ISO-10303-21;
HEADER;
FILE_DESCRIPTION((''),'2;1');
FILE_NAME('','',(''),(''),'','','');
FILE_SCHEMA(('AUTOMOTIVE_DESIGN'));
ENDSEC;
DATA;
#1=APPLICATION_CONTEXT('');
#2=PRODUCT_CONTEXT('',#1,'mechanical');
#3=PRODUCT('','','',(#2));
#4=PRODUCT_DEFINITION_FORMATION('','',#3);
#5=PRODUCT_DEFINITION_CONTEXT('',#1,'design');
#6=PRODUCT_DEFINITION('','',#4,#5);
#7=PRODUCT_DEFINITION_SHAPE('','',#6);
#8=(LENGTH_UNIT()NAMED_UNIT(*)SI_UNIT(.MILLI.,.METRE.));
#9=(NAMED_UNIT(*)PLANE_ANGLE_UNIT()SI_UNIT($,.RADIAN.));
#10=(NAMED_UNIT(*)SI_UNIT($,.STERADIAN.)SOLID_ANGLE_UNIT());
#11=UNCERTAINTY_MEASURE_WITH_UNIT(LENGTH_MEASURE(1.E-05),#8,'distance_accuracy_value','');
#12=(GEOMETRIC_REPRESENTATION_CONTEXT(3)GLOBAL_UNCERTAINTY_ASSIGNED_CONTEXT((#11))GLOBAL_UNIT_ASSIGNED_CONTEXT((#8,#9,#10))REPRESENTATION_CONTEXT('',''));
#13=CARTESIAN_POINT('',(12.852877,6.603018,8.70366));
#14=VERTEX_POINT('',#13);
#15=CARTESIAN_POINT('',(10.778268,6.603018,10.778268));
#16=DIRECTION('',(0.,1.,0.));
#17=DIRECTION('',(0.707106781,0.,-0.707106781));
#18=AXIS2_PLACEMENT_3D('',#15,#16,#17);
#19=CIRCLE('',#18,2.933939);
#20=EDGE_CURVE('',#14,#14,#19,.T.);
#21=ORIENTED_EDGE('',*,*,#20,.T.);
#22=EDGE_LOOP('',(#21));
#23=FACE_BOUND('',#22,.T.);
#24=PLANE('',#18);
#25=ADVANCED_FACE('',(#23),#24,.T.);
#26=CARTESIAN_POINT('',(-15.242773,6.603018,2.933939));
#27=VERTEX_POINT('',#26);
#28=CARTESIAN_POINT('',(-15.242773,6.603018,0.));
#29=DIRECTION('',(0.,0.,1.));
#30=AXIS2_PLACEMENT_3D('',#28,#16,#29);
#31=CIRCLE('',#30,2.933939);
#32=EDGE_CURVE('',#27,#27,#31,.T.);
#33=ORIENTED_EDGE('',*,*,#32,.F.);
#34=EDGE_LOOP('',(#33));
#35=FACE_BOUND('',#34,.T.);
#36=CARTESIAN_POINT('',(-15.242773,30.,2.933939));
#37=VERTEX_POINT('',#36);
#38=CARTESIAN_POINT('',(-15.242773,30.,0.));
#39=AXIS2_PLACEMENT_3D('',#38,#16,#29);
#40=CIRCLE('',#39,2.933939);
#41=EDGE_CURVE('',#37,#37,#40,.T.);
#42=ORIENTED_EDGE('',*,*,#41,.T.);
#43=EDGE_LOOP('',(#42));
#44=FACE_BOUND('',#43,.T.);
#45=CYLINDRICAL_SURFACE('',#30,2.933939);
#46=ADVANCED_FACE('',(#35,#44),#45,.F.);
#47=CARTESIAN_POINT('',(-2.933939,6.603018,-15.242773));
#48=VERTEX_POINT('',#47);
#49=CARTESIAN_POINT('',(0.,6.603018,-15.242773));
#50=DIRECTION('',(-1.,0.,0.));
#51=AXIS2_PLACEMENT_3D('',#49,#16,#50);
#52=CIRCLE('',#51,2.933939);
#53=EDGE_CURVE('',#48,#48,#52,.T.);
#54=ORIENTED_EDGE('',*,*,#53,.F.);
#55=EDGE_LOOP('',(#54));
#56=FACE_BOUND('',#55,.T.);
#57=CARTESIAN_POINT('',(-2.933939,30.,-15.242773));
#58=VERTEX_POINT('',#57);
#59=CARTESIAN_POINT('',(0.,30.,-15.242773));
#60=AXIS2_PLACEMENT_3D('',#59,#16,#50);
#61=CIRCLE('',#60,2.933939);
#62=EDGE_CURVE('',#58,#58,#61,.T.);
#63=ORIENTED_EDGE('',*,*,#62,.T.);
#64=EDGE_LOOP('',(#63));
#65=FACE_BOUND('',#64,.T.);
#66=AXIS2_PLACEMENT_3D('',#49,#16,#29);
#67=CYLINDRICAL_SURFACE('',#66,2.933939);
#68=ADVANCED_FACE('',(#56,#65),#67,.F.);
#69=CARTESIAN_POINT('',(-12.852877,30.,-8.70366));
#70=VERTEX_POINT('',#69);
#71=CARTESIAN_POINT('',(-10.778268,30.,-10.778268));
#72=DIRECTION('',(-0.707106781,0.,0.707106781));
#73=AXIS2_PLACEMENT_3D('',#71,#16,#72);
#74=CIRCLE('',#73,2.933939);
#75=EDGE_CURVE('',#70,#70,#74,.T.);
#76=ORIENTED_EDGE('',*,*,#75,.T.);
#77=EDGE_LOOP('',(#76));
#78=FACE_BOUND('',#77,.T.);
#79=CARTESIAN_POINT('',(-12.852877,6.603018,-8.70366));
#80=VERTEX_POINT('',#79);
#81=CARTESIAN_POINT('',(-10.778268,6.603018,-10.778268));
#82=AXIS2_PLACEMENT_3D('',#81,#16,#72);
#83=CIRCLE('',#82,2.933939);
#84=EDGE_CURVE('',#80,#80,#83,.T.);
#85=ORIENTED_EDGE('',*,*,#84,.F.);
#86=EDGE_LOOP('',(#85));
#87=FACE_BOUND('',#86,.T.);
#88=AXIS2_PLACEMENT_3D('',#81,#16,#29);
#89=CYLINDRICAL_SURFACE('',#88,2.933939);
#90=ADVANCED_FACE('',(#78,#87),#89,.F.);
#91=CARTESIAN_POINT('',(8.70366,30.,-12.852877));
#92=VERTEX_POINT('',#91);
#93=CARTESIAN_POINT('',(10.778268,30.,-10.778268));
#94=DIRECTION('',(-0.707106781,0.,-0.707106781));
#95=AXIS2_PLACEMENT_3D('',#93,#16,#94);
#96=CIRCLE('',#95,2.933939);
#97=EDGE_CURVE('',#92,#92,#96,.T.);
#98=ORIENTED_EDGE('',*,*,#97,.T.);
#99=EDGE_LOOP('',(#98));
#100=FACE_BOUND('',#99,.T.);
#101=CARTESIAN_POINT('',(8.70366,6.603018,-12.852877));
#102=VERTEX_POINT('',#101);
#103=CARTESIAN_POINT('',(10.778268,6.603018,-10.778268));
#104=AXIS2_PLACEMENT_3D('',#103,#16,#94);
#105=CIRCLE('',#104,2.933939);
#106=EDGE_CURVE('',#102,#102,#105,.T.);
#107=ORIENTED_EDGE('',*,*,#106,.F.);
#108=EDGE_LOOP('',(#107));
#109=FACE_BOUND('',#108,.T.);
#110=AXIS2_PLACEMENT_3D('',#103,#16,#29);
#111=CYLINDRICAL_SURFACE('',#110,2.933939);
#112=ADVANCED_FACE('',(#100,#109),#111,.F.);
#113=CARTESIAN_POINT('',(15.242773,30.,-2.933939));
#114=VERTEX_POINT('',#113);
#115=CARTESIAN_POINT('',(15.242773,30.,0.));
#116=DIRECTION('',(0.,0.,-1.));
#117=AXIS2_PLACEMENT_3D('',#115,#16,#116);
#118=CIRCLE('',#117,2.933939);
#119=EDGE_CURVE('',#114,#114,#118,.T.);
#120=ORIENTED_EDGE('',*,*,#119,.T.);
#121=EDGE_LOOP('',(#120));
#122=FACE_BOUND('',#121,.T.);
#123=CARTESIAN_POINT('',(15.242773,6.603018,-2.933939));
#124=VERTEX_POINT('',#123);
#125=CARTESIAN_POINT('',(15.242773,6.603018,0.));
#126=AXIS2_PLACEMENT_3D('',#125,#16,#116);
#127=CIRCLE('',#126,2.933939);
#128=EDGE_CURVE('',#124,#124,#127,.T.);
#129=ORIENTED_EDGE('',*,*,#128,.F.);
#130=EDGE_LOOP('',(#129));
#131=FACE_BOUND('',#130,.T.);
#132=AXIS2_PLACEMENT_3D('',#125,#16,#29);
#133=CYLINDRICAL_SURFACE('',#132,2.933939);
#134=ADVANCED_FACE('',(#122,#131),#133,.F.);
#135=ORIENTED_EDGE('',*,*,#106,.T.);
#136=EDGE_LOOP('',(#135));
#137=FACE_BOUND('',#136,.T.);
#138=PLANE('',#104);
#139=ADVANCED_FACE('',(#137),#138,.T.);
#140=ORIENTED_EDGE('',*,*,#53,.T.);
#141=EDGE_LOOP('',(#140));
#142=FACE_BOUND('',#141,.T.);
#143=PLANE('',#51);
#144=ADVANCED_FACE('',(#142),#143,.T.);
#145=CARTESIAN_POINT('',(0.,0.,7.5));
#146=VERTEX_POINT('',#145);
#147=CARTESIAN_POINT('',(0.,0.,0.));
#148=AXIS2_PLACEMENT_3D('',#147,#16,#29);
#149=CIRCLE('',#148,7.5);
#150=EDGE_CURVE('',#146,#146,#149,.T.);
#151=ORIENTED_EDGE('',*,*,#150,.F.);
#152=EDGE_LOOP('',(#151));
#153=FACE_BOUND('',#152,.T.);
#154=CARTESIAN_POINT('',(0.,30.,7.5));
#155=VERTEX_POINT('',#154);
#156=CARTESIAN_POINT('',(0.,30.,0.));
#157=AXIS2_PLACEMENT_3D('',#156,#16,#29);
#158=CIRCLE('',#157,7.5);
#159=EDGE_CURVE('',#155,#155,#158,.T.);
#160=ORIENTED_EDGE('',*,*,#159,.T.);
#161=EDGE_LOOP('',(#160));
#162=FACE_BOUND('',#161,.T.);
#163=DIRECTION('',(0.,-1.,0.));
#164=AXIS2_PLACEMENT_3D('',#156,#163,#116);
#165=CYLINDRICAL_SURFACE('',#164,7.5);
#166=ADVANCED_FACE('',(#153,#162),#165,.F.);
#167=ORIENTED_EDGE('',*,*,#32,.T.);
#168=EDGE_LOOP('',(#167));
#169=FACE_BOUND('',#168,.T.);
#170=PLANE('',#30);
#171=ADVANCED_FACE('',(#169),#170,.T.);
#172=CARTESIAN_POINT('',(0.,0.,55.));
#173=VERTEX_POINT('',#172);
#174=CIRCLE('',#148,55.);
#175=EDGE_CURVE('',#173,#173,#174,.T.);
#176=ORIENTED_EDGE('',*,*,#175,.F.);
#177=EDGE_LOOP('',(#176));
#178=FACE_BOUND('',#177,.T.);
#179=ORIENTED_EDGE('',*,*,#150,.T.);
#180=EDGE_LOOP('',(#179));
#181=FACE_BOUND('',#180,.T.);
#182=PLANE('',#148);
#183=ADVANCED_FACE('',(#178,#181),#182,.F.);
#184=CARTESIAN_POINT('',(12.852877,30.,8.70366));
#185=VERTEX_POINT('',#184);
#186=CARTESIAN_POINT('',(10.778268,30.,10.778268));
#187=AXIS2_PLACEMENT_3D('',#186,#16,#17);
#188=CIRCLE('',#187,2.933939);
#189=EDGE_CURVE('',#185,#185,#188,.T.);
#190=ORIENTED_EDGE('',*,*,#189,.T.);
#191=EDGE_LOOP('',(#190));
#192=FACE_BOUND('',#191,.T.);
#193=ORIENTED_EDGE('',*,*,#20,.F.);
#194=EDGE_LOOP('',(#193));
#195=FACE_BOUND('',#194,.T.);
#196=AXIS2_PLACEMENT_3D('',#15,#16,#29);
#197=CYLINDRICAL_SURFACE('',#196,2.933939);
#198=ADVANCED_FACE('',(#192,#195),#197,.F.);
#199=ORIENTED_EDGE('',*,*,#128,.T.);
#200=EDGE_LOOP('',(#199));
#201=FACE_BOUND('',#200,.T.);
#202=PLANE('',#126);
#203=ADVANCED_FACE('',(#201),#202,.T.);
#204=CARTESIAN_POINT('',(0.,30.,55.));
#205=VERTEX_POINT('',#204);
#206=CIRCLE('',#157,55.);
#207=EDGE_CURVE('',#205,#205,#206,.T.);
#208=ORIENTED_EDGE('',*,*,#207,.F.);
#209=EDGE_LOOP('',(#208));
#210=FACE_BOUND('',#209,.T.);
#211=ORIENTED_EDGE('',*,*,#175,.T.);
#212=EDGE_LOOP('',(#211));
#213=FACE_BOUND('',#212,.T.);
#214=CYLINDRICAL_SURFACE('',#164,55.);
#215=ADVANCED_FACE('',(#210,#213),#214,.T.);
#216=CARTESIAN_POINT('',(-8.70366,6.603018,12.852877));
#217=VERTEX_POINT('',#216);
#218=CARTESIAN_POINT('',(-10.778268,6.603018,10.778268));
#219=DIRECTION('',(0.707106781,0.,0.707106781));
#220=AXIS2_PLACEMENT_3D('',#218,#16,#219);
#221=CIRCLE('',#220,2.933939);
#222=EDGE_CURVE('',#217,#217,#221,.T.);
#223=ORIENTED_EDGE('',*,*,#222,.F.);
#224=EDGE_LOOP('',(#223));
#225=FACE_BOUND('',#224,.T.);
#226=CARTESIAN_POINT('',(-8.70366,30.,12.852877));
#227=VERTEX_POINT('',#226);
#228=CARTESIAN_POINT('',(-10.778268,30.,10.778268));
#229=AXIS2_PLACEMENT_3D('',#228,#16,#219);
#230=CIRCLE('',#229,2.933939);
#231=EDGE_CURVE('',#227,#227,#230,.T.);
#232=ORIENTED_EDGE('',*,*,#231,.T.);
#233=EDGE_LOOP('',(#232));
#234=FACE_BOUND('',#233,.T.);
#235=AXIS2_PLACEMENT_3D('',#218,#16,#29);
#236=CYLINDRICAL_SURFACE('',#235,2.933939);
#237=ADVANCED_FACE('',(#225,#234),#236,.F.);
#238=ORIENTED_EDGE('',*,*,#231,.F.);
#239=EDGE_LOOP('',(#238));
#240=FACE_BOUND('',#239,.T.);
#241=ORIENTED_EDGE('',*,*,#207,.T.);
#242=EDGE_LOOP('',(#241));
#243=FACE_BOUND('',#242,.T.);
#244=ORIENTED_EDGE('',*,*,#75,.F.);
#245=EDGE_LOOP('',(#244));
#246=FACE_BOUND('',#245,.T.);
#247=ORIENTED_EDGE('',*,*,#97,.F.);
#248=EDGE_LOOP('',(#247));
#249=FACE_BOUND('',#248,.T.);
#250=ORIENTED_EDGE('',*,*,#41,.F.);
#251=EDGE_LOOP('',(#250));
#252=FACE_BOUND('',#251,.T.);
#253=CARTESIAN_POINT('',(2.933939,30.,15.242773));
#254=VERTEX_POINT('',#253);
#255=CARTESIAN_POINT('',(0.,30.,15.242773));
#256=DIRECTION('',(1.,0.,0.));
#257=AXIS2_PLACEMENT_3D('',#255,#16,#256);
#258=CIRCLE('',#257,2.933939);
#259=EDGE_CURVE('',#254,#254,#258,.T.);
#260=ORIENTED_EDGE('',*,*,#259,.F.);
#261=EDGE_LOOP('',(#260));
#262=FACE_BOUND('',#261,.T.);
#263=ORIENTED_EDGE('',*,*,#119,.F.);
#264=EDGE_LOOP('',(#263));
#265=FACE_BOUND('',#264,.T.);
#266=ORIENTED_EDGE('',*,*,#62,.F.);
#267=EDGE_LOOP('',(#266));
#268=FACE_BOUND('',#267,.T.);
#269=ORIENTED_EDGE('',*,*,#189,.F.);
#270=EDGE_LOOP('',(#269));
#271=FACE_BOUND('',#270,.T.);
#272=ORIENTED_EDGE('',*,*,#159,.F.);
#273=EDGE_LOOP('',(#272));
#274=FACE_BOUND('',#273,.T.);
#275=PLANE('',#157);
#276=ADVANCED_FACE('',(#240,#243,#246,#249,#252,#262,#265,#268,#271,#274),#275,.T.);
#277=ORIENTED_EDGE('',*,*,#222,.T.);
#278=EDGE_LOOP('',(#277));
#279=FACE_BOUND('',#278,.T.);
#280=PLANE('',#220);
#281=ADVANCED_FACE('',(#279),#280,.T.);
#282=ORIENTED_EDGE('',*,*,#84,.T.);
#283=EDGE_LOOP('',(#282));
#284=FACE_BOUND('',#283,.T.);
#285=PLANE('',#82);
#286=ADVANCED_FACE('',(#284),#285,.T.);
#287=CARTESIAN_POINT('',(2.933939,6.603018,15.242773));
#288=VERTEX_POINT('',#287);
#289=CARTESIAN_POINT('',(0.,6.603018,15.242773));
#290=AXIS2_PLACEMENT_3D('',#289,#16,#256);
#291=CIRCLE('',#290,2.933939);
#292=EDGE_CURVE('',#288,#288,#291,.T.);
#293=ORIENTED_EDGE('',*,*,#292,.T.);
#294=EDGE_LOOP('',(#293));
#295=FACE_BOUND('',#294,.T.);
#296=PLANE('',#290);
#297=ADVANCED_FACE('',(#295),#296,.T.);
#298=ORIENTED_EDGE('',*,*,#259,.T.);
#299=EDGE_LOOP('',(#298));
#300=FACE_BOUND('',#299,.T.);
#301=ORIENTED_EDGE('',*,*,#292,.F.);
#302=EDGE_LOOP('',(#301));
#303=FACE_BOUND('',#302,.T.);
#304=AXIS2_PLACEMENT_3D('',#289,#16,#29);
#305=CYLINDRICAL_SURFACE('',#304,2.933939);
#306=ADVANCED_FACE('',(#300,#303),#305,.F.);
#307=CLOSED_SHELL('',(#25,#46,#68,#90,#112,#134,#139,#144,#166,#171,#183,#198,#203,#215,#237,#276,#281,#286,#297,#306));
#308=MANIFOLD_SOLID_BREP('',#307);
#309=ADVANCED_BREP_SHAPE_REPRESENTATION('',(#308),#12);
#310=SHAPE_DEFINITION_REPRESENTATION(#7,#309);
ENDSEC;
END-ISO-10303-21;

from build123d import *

# Parameters (mm, degrees)
SKETCH1_R           = 55
BOSS_EXTRUDE1_DEPTH = 30
SKETCH2_R           = 7.5
CUT_EXTRUDE1_DEPTH  = 84.366660003
SKETCH3_R           = 2.93393942
CUT_EXTRUDE2_DEPTH  = 23.396981861
CIRPATTERN1_COUNT   = 8


with BuildPart() as part:
    # Sketch1 → Boss-Extrude1 (new body)
    with BuildSketch(Plane(origin=(0, 0, 0), x_dir=(1, 0, 0), z_dir=(0, 1, 0))):
        Circle(SKETCH1_R)
    extrude(amount=BOSS_EXTRUDE1_DEPTH)

    # Sketch2 → Cut-Extrude1 (cut, through all)
    with BuildSketch(Plane(origin=(0, 0, 0), x_dir=(1, 0, 0), z_dir=(0, 1, 0))):
        Circle(SKETCH2_R)
    extrude(amount=CUT_EXTRUDE1_DEPTH, mode=Mode.SUBTRACT)

    # Sketch3 → Cut-Extrude2 (cut)
    with BuildSketch(Plane(origin=(0, 30, 0), x_dir=(1, 0, 0), z_dir=(0, 1, 0))):
        with Locations((-15.242772915, 0)):
            Circle(SKETCH3_R)
    cut_extrude2 = extrude(amount=-CUT_EXTRUDE2_DEPTH, mode=Mode.SUBTRACT)

    # CirPattern1: Cut-Extrude2 ×8 about axis
    cirpattern1_axis = Axis((0, 0, 0), (0, 1, 0))
    for i in range(1, CIRPATTERN1_COUNT):
        add(cut_extrude2.rotate(cirpattern1_axis, i * 360 / CIRPATTERN1_COUNT), mode=Mode.SUBTRACT)


solid = part.part
